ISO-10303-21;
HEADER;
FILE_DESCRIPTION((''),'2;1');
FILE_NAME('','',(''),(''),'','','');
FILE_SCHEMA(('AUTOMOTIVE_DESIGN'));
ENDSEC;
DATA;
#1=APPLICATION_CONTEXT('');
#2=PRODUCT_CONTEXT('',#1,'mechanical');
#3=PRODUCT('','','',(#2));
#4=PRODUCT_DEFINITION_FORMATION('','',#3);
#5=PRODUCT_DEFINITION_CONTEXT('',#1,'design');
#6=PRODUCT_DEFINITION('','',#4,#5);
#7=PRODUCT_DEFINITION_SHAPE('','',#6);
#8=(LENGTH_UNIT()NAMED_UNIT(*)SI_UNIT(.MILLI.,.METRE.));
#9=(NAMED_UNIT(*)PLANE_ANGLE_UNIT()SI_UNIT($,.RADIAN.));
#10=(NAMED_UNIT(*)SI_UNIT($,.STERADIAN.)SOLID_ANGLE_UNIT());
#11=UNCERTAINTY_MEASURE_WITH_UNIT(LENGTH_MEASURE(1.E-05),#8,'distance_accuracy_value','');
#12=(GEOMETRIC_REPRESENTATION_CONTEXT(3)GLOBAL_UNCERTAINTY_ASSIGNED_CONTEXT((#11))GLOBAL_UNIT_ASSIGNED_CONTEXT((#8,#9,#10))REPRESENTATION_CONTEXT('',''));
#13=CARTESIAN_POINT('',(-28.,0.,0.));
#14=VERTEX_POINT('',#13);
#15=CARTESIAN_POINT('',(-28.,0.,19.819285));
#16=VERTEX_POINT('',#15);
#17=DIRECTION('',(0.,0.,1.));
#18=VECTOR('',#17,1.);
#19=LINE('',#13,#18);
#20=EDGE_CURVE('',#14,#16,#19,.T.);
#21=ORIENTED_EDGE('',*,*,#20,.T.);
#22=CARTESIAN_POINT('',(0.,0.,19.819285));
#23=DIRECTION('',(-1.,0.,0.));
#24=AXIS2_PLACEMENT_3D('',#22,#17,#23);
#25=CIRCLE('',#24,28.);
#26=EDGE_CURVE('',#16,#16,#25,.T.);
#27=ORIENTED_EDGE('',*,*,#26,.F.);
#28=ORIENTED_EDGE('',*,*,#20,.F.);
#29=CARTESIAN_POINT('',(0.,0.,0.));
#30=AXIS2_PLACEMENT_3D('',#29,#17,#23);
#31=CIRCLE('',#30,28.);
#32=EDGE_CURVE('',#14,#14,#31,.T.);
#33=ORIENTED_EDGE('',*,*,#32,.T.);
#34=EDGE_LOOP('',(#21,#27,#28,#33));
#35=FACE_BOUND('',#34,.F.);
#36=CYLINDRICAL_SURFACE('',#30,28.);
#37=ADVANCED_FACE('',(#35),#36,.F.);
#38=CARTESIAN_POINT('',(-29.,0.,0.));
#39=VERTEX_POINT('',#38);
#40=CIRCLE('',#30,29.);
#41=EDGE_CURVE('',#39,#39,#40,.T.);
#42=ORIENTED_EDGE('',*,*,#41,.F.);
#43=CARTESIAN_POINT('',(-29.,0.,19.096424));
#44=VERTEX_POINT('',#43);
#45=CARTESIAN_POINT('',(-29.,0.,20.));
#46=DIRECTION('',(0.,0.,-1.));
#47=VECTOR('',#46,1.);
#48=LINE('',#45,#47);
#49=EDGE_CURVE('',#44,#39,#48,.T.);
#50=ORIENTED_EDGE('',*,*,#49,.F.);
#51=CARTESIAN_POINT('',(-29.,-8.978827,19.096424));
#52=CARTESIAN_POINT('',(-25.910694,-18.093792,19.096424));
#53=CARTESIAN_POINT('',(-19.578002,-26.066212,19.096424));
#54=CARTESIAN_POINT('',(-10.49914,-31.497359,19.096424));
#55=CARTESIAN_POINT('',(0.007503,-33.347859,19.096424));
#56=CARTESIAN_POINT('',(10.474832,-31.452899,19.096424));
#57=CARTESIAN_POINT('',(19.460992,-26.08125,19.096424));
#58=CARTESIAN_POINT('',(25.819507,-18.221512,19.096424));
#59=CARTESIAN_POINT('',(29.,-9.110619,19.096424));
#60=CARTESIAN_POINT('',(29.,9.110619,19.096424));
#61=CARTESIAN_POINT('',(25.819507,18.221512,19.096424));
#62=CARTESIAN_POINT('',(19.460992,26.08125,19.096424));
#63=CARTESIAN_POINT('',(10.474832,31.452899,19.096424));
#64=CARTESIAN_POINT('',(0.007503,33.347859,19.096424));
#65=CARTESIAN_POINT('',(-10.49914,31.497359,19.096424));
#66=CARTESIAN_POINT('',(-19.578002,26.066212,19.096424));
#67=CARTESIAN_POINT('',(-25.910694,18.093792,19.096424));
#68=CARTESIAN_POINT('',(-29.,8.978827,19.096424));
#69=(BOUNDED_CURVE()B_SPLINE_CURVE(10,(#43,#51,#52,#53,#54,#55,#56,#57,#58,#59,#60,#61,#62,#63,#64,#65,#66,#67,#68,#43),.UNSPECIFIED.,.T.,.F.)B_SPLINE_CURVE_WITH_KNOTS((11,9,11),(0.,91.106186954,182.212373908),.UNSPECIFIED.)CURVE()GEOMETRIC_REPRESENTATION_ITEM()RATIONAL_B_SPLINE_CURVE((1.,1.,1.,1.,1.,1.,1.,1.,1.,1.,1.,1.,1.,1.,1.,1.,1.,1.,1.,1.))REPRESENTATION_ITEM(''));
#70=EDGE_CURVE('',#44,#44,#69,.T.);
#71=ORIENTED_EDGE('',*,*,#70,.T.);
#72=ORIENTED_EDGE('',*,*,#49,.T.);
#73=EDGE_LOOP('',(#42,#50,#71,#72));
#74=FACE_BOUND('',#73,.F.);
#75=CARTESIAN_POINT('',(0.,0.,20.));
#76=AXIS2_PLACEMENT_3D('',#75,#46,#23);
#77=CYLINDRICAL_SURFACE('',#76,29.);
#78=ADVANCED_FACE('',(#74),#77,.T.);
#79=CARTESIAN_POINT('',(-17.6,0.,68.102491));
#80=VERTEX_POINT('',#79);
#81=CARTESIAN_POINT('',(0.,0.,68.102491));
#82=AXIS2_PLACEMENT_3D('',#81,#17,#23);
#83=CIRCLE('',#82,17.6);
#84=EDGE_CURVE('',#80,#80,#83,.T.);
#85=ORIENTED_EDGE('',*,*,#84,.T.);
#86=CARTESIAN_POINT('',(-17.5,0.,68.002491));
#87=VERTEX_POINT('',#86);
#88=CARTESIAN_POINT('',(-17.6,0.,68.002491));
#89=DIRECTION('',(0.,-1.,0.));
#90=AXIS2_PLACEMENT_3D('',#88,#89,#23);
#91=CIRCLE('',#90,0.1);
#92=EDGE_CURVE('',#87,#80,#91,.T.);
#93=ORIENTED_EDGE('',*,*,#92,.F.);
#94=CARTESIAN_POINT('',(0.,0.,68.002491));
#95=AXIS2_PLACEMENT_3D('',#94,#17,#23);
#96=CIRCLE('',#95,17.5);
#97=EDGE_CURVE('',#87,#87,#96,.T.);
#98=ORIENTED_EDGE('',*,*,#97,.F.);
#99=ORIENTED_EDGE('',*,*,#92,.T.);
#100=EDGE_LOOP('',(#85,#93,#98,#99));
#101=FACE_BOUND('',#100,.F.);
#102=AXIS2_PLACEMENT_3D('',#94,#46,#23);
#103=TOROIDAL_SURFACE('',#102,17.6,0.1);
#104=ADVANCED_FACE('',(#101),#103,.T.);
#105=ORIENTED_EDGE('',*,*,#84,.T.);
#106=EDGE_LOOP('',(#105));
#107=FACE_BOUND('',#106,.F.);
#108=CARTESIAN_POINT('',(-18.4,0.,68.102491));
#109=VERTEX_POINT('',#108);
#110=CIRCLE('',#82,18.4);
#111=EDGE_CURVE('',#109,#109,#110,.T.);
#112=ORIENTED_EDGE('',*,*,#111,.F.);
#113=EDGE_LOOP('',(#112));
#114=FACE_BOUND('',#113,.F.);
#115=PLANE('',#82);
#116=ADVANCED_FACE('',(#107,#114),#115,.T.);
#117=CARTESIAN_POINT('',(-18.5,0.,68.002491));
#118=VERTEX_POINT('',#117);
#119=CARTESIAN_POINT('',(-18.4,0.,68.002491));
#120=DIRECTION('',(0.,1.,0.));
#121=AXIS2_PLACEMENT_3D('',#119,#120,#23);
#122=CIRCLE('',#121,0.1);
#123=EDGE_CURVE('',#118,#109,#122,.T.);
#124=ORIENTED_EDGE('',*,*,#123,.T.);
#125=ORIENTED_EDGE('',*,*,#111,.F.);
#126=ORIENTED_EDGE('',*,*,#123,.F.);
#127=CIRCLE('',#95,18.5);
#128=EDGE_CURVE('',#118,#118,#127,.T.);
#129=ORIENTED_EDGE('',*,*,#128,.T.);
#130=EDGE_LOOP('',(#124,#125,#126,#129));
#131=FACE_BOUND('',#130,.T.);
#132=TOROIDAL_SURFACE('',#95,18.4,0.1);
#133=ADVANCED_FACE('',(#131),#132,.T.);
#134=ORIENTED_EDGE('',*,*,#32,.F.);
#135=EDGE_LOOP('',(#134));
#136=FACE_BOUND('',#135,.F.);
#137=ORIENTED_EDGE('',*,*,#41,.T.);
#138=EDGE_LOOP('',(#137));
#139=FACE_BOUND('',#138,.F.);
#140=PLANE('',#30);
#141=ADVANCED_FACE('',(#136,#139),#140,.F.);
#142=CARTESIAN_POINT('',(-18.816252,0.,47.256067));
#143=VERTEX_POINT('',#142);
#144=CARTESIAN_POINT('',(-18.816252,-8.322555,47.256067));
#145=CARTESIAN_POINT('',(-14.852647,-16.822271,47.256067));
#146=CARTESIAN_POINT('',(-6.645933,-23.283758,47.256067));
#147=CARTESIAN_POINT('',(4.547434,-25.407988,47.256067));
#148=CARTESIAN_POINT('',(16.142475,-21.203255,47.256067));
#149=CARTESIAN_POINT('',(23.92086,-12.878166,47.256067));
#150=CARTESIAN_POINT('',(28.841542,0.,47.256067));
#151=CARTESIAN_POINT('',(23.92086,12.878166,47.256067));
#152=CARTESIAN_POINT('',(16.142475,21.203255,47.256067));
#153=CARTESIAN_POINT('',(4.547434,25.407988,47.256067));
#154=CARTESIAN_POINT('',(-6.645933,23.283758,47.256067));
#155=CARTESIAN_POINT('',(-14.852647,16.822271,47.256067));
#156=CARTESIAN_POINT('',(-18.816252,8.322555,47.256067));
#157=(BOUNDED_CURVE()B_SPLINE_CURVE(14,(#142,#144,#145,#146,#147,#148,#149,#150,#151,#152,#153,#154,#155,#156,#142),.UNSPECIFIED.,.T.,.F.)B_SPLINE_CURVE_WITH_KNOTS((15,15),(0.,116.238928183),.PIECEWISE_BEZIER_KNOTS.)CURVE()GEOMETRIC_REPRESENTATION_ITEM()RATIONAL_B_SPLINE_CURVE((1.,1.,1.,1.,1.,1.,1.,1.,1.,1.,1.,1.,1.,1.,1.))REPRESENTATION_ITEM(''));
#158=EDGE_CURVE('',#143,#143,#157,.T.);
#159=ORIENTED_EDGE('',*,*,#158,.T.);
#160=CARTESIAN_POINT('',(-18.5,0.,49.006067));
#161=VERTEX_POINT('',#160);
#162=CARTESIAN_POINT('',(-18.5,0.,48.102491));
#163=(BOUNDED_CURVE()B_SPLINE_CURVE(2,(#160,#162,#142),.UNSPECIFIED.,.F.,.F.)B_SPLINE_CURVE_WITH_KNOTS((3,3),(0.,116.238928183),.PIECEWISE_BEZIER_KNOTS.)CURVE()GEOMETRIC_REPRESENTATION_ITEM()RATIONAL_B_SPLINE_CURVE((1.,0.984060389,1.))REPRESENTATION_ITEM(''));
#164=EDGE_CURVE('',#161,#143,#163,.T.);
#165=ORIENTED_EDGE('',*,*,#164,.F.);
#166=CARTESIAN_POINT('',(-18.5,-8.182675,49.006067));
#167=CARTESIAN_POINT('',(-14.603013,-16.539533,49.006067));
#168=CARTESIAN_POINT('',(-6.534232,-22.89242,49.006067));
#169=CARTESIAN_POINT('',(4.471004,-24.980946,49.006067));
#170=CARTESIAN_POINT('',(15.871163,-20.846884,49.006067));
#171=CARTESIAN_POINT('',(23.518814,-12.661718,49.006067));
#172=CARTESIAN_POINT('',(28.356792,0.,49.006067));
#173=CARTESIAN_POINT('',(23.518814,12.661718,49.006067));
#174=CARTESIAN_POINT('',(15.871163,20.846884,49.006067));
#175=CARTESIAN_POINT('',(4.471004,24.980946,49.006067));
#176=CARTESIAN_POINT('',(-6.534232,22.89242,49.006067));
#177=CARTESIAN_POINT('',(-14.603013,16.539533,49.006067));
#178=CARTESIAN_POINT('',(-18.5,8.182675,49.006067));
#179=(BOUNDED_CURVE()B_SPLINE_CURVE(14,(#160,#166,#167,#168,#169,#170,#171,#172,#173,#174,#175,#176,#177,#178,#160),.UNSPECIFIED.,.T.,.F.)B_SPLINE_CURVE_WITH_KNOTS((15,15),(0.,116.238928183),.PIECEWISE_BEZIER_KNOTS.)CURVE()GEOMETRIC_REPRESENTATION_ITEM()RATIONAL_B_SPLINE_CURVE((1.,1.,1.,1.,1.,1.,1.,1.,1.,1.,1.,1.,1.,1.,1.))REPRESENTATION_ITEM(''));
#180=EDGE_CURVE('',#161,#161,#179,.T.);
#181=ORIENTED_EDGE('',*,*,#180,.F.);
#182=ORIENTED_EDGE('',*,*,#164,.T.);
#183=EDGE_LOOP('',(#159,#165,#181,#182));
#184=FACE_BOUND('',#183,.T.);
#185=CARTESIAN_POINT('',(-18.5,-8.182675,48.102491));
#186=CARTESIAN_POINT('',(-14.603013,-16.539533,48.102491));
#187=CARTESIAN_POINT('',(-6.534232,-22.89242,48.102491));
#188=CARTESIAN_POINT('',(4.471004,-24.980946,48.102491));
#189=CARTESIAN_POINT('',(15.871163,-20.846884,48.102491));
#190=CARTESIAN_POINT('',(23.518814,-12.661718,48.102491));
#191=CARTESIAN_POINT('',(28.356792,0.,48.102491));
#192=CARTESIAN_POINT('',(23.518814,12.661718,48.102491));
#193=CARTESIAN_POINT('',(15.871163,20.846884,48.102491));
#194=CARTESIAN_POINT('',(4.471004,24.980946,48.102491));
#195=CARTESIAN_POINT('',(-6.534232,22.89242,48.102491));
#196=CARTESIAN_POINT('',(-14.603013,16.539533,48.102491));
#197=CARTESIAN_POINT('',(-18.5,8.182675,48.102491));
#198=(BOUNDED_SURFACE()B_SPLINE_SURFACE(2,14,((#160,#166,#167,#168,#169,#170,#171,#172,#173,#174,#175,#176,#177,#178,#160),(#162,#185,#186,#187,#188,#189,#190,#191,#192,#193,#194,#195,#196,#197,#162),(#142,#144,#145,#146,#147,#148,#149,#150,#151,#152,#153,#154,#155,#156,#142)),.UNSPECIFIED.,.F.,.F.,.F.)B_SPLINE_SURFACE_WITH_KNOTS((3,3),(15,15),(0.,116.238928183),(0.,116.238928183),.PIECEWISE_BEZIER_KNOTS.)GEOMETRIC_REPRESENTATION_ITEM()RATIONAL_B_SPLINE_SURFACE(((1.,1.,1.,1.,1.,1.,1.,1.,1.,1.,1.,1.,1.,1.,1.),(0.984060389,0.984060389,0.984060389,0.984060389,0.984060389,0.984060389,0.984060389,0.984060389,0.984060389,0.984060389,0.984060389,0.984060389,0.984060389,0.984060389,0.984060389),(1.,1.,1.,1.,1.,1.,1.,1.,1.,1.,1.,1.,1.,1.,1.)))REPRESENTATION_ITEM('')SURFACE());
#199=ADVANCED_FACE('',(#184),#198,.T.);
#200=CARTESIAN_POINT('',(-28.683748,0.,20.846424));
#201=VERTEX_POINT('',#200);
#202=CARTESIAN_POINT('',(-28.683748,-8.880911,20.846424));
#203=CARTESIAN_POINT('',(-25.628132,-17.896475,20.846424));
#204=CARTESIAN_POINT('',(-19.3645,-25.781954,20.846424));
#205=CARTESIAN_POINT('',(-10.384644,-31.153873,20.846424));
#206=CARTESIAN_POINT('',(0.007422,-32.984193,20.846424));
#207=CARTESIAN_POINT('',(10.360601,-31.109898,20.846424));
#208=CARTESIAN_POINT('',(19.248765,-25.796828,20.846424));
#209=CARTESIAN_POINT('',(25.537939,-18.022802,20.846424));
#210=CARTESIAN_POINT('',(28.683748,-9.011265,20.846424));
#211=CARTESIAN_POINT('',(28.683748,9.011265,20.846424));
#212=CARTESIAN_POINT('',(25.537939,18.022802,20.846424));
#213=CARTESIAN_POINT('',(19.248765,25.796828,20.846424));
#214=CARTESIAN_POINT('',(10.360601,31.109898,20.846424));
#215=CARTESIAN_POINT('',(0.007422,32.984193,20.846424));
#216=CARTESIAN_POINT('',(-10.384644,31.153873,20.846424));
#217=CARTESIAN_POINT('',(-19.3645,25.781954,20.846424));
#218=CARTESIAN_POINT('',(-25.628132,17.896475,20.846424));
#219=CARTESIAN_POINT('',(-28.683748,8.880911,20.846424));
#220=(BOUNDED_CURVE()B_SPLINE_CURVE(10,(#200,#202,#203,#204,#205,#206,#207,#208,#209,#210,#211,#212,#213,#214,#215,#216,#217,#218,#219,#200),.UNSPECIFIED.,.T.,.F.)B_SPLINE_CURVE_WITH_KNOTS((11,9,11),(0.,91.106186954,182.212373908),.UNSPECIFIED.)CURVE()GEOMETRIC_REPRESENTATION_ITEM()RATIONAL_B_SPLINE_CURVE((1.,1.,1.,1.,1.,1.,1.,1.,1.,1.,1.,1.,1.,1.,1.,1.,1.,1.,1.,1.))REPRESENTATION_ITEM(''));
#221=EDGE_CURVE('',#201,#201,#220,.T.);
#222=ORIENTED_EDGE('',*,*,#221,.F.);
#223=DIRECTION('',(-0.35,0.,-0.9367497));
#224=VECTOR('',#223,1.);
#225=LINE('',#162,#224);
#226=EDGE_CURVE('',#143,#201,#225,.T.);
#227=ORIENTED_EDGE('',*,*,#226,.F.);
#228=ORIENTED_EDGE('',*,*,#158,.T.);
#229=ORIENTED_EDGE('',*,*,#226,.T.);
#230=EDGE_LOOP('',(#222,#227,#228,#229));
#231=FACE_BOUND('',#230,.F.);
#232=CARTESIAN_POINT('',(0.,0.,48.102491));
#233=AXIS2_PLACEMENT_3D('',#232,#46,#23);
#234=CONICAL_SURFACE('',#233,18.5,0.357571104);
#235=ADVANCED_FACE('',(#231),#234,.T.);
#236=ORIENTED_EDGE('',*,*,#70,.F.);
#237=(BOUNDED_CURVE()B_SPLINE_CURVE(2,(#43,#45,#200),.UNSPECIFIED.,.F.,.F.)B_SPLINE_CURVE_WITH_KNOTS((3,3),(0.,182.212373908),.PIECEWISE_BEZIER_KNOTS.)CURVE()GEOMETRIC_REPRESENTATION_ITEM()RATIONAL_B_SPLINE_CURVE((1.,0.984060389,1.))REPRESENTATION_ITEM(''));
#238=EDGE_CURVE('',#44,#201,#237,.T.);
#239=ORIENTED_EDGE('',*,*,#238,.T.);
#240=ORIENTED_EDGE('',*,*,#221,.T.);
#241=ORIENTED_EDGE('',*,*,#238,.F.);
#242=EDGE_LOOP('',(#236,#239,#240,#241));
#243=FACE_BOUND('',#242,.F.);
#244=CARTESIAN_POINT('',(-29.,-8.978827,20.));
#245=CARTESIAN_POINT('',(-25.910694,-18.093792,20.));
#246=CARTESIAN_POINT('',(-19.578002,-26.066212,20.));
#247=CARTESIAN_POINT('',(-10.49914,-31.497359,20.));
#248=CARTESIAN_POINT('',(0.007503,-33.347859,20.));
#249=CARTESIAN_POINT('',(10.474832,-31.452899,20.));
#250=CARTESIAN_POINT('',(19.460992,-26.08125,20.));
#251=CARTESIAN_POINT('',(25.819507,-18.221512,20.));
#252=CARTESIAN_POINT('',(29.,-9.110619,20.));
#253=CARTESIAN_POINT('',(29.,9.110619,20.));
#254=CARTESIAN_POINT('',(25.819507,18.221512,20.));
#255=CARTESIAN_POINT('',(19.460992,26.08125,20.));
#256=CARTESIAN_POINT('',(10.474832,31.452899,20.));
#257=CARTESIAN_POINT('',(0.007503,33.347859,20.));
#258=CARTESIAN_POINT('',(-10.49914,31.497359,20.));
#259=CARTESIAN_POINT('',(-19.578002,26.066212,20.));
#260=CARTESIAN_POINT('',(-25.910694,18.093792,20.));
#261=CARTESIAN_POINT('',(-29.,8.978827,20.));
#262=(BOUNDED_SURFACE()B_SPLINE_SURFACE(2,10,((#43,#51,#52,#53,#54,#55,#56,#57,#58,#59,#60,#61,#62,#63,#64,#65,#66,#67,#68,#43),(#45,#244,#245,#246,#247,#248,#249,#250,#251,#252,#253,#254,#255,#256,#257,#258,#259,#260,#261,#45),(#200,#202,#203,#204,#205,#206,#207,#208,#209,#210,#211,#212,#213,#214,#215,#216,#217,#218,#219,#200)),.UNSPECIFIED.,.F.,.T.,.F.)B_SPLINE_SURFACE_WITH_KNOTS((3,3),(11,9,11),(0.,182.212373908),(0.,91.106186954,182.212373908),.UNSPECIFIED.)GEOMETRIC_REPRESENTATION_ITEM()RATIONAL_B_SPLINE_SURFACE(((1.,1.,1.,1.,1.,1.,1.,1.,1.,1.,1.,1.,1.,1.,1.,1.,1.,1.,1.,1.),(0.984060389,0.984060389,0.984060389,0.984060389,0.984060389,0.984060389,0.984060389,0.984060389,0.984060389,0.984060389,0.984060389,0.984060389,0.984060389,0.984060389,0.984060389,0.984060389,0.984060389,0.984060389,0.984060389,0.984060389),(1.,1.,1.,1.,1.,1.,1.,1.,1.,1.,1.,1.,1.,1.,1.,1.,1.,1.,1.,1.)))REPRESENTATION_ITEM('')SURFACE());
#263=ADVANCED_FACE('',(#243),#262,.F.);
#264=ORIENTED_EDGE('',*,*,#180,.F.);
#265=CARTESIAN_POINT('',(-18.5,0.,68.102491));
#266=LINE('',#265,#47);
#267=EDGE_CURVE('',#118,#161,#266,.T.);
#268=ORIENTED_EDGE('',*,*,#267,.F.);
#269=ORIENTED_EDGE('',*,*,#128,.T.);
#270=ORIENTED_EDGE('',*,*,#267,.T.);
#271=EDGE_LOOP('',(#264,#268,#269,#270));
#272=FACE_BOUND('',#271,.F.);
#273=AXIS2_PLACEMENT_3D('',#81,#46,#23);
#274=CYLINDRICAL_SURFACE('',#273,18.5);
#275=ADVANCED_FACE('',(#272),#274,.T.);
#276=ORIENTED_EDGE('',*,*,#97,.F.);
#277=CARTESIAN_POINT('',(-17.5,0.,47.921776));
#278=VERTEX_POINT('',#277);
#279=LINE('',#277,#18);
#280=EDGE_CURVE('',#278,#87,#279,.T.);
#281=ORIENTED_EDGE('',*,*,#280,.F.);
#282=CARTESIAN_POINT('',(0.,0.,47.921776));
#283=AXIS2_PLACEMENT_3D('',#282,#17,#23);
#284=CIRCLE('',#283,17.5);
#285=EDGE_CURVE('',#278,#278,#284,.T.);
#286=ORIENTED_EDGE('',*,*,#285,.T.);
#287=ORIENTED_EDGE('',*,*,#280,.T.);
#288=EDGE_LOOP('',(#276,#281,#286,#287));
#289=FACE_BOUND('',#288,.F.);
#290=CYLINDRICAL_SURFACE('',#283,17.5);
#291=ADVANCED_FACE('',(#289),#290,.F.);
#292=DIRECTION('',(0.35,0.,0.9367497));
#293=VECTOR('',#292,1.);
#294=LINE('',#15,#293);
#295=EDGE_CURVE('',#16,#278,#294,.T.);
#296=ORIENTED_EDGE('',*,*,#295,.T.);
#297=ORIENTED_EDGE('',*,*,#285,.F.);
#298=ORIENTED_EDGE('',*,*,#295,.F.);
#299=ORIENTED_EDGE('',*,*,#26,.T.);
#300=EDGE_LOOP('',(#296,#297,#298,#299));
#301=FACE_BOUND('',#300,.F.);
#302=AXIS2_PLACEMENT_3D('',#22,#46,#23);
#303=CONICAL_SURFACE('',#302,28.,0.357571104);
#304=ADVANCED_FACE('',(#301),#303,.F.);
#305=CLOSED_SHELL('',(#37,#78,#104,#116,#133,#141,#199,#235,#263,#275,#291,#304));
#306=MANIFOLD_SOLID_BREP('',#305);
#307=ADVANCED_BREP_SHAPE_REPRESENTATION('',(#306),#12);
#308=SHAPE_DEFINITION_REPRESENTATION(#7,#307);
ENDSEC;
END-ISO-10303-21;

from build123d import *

# Parameters (mm, degrees)
F2_R = 5
F3_R = 0.1


with BuildPart() as f1:
    # F0 (on Front) → F1 (revolve)
    with BuildSketch(Plane.XZ):
        Polygon((-29, 20), (-29, 0), (-28, 0), (-28, 19.8192848565), (-17.5, 47.9217758492), (-17.5, 68.1024909928), (-18.5, 68.1024909928), (-18.5, 48.1024909928), align=None)
    revolve(axis=Axis((0, 0, 23.4480407089), (0, 0, 1)))

    # F2
    f2_edges = [f1.edges().sort_by_distance(p)[0] for p in [
        (29, 0, 20),
        (18.5, 0, 48.102491),
    ]]
    fillet(f2_edges, radius=F2_R)

    # F3
    f3_edges = [f1.edges().sort_by_distance(p)[0] for p in [
        (17.5, 0, 68.102491),
        (18.5, 0, 68.102491),
    ]]
    fillet(f3_edges, radius=F3_R)


solid = f1.part
